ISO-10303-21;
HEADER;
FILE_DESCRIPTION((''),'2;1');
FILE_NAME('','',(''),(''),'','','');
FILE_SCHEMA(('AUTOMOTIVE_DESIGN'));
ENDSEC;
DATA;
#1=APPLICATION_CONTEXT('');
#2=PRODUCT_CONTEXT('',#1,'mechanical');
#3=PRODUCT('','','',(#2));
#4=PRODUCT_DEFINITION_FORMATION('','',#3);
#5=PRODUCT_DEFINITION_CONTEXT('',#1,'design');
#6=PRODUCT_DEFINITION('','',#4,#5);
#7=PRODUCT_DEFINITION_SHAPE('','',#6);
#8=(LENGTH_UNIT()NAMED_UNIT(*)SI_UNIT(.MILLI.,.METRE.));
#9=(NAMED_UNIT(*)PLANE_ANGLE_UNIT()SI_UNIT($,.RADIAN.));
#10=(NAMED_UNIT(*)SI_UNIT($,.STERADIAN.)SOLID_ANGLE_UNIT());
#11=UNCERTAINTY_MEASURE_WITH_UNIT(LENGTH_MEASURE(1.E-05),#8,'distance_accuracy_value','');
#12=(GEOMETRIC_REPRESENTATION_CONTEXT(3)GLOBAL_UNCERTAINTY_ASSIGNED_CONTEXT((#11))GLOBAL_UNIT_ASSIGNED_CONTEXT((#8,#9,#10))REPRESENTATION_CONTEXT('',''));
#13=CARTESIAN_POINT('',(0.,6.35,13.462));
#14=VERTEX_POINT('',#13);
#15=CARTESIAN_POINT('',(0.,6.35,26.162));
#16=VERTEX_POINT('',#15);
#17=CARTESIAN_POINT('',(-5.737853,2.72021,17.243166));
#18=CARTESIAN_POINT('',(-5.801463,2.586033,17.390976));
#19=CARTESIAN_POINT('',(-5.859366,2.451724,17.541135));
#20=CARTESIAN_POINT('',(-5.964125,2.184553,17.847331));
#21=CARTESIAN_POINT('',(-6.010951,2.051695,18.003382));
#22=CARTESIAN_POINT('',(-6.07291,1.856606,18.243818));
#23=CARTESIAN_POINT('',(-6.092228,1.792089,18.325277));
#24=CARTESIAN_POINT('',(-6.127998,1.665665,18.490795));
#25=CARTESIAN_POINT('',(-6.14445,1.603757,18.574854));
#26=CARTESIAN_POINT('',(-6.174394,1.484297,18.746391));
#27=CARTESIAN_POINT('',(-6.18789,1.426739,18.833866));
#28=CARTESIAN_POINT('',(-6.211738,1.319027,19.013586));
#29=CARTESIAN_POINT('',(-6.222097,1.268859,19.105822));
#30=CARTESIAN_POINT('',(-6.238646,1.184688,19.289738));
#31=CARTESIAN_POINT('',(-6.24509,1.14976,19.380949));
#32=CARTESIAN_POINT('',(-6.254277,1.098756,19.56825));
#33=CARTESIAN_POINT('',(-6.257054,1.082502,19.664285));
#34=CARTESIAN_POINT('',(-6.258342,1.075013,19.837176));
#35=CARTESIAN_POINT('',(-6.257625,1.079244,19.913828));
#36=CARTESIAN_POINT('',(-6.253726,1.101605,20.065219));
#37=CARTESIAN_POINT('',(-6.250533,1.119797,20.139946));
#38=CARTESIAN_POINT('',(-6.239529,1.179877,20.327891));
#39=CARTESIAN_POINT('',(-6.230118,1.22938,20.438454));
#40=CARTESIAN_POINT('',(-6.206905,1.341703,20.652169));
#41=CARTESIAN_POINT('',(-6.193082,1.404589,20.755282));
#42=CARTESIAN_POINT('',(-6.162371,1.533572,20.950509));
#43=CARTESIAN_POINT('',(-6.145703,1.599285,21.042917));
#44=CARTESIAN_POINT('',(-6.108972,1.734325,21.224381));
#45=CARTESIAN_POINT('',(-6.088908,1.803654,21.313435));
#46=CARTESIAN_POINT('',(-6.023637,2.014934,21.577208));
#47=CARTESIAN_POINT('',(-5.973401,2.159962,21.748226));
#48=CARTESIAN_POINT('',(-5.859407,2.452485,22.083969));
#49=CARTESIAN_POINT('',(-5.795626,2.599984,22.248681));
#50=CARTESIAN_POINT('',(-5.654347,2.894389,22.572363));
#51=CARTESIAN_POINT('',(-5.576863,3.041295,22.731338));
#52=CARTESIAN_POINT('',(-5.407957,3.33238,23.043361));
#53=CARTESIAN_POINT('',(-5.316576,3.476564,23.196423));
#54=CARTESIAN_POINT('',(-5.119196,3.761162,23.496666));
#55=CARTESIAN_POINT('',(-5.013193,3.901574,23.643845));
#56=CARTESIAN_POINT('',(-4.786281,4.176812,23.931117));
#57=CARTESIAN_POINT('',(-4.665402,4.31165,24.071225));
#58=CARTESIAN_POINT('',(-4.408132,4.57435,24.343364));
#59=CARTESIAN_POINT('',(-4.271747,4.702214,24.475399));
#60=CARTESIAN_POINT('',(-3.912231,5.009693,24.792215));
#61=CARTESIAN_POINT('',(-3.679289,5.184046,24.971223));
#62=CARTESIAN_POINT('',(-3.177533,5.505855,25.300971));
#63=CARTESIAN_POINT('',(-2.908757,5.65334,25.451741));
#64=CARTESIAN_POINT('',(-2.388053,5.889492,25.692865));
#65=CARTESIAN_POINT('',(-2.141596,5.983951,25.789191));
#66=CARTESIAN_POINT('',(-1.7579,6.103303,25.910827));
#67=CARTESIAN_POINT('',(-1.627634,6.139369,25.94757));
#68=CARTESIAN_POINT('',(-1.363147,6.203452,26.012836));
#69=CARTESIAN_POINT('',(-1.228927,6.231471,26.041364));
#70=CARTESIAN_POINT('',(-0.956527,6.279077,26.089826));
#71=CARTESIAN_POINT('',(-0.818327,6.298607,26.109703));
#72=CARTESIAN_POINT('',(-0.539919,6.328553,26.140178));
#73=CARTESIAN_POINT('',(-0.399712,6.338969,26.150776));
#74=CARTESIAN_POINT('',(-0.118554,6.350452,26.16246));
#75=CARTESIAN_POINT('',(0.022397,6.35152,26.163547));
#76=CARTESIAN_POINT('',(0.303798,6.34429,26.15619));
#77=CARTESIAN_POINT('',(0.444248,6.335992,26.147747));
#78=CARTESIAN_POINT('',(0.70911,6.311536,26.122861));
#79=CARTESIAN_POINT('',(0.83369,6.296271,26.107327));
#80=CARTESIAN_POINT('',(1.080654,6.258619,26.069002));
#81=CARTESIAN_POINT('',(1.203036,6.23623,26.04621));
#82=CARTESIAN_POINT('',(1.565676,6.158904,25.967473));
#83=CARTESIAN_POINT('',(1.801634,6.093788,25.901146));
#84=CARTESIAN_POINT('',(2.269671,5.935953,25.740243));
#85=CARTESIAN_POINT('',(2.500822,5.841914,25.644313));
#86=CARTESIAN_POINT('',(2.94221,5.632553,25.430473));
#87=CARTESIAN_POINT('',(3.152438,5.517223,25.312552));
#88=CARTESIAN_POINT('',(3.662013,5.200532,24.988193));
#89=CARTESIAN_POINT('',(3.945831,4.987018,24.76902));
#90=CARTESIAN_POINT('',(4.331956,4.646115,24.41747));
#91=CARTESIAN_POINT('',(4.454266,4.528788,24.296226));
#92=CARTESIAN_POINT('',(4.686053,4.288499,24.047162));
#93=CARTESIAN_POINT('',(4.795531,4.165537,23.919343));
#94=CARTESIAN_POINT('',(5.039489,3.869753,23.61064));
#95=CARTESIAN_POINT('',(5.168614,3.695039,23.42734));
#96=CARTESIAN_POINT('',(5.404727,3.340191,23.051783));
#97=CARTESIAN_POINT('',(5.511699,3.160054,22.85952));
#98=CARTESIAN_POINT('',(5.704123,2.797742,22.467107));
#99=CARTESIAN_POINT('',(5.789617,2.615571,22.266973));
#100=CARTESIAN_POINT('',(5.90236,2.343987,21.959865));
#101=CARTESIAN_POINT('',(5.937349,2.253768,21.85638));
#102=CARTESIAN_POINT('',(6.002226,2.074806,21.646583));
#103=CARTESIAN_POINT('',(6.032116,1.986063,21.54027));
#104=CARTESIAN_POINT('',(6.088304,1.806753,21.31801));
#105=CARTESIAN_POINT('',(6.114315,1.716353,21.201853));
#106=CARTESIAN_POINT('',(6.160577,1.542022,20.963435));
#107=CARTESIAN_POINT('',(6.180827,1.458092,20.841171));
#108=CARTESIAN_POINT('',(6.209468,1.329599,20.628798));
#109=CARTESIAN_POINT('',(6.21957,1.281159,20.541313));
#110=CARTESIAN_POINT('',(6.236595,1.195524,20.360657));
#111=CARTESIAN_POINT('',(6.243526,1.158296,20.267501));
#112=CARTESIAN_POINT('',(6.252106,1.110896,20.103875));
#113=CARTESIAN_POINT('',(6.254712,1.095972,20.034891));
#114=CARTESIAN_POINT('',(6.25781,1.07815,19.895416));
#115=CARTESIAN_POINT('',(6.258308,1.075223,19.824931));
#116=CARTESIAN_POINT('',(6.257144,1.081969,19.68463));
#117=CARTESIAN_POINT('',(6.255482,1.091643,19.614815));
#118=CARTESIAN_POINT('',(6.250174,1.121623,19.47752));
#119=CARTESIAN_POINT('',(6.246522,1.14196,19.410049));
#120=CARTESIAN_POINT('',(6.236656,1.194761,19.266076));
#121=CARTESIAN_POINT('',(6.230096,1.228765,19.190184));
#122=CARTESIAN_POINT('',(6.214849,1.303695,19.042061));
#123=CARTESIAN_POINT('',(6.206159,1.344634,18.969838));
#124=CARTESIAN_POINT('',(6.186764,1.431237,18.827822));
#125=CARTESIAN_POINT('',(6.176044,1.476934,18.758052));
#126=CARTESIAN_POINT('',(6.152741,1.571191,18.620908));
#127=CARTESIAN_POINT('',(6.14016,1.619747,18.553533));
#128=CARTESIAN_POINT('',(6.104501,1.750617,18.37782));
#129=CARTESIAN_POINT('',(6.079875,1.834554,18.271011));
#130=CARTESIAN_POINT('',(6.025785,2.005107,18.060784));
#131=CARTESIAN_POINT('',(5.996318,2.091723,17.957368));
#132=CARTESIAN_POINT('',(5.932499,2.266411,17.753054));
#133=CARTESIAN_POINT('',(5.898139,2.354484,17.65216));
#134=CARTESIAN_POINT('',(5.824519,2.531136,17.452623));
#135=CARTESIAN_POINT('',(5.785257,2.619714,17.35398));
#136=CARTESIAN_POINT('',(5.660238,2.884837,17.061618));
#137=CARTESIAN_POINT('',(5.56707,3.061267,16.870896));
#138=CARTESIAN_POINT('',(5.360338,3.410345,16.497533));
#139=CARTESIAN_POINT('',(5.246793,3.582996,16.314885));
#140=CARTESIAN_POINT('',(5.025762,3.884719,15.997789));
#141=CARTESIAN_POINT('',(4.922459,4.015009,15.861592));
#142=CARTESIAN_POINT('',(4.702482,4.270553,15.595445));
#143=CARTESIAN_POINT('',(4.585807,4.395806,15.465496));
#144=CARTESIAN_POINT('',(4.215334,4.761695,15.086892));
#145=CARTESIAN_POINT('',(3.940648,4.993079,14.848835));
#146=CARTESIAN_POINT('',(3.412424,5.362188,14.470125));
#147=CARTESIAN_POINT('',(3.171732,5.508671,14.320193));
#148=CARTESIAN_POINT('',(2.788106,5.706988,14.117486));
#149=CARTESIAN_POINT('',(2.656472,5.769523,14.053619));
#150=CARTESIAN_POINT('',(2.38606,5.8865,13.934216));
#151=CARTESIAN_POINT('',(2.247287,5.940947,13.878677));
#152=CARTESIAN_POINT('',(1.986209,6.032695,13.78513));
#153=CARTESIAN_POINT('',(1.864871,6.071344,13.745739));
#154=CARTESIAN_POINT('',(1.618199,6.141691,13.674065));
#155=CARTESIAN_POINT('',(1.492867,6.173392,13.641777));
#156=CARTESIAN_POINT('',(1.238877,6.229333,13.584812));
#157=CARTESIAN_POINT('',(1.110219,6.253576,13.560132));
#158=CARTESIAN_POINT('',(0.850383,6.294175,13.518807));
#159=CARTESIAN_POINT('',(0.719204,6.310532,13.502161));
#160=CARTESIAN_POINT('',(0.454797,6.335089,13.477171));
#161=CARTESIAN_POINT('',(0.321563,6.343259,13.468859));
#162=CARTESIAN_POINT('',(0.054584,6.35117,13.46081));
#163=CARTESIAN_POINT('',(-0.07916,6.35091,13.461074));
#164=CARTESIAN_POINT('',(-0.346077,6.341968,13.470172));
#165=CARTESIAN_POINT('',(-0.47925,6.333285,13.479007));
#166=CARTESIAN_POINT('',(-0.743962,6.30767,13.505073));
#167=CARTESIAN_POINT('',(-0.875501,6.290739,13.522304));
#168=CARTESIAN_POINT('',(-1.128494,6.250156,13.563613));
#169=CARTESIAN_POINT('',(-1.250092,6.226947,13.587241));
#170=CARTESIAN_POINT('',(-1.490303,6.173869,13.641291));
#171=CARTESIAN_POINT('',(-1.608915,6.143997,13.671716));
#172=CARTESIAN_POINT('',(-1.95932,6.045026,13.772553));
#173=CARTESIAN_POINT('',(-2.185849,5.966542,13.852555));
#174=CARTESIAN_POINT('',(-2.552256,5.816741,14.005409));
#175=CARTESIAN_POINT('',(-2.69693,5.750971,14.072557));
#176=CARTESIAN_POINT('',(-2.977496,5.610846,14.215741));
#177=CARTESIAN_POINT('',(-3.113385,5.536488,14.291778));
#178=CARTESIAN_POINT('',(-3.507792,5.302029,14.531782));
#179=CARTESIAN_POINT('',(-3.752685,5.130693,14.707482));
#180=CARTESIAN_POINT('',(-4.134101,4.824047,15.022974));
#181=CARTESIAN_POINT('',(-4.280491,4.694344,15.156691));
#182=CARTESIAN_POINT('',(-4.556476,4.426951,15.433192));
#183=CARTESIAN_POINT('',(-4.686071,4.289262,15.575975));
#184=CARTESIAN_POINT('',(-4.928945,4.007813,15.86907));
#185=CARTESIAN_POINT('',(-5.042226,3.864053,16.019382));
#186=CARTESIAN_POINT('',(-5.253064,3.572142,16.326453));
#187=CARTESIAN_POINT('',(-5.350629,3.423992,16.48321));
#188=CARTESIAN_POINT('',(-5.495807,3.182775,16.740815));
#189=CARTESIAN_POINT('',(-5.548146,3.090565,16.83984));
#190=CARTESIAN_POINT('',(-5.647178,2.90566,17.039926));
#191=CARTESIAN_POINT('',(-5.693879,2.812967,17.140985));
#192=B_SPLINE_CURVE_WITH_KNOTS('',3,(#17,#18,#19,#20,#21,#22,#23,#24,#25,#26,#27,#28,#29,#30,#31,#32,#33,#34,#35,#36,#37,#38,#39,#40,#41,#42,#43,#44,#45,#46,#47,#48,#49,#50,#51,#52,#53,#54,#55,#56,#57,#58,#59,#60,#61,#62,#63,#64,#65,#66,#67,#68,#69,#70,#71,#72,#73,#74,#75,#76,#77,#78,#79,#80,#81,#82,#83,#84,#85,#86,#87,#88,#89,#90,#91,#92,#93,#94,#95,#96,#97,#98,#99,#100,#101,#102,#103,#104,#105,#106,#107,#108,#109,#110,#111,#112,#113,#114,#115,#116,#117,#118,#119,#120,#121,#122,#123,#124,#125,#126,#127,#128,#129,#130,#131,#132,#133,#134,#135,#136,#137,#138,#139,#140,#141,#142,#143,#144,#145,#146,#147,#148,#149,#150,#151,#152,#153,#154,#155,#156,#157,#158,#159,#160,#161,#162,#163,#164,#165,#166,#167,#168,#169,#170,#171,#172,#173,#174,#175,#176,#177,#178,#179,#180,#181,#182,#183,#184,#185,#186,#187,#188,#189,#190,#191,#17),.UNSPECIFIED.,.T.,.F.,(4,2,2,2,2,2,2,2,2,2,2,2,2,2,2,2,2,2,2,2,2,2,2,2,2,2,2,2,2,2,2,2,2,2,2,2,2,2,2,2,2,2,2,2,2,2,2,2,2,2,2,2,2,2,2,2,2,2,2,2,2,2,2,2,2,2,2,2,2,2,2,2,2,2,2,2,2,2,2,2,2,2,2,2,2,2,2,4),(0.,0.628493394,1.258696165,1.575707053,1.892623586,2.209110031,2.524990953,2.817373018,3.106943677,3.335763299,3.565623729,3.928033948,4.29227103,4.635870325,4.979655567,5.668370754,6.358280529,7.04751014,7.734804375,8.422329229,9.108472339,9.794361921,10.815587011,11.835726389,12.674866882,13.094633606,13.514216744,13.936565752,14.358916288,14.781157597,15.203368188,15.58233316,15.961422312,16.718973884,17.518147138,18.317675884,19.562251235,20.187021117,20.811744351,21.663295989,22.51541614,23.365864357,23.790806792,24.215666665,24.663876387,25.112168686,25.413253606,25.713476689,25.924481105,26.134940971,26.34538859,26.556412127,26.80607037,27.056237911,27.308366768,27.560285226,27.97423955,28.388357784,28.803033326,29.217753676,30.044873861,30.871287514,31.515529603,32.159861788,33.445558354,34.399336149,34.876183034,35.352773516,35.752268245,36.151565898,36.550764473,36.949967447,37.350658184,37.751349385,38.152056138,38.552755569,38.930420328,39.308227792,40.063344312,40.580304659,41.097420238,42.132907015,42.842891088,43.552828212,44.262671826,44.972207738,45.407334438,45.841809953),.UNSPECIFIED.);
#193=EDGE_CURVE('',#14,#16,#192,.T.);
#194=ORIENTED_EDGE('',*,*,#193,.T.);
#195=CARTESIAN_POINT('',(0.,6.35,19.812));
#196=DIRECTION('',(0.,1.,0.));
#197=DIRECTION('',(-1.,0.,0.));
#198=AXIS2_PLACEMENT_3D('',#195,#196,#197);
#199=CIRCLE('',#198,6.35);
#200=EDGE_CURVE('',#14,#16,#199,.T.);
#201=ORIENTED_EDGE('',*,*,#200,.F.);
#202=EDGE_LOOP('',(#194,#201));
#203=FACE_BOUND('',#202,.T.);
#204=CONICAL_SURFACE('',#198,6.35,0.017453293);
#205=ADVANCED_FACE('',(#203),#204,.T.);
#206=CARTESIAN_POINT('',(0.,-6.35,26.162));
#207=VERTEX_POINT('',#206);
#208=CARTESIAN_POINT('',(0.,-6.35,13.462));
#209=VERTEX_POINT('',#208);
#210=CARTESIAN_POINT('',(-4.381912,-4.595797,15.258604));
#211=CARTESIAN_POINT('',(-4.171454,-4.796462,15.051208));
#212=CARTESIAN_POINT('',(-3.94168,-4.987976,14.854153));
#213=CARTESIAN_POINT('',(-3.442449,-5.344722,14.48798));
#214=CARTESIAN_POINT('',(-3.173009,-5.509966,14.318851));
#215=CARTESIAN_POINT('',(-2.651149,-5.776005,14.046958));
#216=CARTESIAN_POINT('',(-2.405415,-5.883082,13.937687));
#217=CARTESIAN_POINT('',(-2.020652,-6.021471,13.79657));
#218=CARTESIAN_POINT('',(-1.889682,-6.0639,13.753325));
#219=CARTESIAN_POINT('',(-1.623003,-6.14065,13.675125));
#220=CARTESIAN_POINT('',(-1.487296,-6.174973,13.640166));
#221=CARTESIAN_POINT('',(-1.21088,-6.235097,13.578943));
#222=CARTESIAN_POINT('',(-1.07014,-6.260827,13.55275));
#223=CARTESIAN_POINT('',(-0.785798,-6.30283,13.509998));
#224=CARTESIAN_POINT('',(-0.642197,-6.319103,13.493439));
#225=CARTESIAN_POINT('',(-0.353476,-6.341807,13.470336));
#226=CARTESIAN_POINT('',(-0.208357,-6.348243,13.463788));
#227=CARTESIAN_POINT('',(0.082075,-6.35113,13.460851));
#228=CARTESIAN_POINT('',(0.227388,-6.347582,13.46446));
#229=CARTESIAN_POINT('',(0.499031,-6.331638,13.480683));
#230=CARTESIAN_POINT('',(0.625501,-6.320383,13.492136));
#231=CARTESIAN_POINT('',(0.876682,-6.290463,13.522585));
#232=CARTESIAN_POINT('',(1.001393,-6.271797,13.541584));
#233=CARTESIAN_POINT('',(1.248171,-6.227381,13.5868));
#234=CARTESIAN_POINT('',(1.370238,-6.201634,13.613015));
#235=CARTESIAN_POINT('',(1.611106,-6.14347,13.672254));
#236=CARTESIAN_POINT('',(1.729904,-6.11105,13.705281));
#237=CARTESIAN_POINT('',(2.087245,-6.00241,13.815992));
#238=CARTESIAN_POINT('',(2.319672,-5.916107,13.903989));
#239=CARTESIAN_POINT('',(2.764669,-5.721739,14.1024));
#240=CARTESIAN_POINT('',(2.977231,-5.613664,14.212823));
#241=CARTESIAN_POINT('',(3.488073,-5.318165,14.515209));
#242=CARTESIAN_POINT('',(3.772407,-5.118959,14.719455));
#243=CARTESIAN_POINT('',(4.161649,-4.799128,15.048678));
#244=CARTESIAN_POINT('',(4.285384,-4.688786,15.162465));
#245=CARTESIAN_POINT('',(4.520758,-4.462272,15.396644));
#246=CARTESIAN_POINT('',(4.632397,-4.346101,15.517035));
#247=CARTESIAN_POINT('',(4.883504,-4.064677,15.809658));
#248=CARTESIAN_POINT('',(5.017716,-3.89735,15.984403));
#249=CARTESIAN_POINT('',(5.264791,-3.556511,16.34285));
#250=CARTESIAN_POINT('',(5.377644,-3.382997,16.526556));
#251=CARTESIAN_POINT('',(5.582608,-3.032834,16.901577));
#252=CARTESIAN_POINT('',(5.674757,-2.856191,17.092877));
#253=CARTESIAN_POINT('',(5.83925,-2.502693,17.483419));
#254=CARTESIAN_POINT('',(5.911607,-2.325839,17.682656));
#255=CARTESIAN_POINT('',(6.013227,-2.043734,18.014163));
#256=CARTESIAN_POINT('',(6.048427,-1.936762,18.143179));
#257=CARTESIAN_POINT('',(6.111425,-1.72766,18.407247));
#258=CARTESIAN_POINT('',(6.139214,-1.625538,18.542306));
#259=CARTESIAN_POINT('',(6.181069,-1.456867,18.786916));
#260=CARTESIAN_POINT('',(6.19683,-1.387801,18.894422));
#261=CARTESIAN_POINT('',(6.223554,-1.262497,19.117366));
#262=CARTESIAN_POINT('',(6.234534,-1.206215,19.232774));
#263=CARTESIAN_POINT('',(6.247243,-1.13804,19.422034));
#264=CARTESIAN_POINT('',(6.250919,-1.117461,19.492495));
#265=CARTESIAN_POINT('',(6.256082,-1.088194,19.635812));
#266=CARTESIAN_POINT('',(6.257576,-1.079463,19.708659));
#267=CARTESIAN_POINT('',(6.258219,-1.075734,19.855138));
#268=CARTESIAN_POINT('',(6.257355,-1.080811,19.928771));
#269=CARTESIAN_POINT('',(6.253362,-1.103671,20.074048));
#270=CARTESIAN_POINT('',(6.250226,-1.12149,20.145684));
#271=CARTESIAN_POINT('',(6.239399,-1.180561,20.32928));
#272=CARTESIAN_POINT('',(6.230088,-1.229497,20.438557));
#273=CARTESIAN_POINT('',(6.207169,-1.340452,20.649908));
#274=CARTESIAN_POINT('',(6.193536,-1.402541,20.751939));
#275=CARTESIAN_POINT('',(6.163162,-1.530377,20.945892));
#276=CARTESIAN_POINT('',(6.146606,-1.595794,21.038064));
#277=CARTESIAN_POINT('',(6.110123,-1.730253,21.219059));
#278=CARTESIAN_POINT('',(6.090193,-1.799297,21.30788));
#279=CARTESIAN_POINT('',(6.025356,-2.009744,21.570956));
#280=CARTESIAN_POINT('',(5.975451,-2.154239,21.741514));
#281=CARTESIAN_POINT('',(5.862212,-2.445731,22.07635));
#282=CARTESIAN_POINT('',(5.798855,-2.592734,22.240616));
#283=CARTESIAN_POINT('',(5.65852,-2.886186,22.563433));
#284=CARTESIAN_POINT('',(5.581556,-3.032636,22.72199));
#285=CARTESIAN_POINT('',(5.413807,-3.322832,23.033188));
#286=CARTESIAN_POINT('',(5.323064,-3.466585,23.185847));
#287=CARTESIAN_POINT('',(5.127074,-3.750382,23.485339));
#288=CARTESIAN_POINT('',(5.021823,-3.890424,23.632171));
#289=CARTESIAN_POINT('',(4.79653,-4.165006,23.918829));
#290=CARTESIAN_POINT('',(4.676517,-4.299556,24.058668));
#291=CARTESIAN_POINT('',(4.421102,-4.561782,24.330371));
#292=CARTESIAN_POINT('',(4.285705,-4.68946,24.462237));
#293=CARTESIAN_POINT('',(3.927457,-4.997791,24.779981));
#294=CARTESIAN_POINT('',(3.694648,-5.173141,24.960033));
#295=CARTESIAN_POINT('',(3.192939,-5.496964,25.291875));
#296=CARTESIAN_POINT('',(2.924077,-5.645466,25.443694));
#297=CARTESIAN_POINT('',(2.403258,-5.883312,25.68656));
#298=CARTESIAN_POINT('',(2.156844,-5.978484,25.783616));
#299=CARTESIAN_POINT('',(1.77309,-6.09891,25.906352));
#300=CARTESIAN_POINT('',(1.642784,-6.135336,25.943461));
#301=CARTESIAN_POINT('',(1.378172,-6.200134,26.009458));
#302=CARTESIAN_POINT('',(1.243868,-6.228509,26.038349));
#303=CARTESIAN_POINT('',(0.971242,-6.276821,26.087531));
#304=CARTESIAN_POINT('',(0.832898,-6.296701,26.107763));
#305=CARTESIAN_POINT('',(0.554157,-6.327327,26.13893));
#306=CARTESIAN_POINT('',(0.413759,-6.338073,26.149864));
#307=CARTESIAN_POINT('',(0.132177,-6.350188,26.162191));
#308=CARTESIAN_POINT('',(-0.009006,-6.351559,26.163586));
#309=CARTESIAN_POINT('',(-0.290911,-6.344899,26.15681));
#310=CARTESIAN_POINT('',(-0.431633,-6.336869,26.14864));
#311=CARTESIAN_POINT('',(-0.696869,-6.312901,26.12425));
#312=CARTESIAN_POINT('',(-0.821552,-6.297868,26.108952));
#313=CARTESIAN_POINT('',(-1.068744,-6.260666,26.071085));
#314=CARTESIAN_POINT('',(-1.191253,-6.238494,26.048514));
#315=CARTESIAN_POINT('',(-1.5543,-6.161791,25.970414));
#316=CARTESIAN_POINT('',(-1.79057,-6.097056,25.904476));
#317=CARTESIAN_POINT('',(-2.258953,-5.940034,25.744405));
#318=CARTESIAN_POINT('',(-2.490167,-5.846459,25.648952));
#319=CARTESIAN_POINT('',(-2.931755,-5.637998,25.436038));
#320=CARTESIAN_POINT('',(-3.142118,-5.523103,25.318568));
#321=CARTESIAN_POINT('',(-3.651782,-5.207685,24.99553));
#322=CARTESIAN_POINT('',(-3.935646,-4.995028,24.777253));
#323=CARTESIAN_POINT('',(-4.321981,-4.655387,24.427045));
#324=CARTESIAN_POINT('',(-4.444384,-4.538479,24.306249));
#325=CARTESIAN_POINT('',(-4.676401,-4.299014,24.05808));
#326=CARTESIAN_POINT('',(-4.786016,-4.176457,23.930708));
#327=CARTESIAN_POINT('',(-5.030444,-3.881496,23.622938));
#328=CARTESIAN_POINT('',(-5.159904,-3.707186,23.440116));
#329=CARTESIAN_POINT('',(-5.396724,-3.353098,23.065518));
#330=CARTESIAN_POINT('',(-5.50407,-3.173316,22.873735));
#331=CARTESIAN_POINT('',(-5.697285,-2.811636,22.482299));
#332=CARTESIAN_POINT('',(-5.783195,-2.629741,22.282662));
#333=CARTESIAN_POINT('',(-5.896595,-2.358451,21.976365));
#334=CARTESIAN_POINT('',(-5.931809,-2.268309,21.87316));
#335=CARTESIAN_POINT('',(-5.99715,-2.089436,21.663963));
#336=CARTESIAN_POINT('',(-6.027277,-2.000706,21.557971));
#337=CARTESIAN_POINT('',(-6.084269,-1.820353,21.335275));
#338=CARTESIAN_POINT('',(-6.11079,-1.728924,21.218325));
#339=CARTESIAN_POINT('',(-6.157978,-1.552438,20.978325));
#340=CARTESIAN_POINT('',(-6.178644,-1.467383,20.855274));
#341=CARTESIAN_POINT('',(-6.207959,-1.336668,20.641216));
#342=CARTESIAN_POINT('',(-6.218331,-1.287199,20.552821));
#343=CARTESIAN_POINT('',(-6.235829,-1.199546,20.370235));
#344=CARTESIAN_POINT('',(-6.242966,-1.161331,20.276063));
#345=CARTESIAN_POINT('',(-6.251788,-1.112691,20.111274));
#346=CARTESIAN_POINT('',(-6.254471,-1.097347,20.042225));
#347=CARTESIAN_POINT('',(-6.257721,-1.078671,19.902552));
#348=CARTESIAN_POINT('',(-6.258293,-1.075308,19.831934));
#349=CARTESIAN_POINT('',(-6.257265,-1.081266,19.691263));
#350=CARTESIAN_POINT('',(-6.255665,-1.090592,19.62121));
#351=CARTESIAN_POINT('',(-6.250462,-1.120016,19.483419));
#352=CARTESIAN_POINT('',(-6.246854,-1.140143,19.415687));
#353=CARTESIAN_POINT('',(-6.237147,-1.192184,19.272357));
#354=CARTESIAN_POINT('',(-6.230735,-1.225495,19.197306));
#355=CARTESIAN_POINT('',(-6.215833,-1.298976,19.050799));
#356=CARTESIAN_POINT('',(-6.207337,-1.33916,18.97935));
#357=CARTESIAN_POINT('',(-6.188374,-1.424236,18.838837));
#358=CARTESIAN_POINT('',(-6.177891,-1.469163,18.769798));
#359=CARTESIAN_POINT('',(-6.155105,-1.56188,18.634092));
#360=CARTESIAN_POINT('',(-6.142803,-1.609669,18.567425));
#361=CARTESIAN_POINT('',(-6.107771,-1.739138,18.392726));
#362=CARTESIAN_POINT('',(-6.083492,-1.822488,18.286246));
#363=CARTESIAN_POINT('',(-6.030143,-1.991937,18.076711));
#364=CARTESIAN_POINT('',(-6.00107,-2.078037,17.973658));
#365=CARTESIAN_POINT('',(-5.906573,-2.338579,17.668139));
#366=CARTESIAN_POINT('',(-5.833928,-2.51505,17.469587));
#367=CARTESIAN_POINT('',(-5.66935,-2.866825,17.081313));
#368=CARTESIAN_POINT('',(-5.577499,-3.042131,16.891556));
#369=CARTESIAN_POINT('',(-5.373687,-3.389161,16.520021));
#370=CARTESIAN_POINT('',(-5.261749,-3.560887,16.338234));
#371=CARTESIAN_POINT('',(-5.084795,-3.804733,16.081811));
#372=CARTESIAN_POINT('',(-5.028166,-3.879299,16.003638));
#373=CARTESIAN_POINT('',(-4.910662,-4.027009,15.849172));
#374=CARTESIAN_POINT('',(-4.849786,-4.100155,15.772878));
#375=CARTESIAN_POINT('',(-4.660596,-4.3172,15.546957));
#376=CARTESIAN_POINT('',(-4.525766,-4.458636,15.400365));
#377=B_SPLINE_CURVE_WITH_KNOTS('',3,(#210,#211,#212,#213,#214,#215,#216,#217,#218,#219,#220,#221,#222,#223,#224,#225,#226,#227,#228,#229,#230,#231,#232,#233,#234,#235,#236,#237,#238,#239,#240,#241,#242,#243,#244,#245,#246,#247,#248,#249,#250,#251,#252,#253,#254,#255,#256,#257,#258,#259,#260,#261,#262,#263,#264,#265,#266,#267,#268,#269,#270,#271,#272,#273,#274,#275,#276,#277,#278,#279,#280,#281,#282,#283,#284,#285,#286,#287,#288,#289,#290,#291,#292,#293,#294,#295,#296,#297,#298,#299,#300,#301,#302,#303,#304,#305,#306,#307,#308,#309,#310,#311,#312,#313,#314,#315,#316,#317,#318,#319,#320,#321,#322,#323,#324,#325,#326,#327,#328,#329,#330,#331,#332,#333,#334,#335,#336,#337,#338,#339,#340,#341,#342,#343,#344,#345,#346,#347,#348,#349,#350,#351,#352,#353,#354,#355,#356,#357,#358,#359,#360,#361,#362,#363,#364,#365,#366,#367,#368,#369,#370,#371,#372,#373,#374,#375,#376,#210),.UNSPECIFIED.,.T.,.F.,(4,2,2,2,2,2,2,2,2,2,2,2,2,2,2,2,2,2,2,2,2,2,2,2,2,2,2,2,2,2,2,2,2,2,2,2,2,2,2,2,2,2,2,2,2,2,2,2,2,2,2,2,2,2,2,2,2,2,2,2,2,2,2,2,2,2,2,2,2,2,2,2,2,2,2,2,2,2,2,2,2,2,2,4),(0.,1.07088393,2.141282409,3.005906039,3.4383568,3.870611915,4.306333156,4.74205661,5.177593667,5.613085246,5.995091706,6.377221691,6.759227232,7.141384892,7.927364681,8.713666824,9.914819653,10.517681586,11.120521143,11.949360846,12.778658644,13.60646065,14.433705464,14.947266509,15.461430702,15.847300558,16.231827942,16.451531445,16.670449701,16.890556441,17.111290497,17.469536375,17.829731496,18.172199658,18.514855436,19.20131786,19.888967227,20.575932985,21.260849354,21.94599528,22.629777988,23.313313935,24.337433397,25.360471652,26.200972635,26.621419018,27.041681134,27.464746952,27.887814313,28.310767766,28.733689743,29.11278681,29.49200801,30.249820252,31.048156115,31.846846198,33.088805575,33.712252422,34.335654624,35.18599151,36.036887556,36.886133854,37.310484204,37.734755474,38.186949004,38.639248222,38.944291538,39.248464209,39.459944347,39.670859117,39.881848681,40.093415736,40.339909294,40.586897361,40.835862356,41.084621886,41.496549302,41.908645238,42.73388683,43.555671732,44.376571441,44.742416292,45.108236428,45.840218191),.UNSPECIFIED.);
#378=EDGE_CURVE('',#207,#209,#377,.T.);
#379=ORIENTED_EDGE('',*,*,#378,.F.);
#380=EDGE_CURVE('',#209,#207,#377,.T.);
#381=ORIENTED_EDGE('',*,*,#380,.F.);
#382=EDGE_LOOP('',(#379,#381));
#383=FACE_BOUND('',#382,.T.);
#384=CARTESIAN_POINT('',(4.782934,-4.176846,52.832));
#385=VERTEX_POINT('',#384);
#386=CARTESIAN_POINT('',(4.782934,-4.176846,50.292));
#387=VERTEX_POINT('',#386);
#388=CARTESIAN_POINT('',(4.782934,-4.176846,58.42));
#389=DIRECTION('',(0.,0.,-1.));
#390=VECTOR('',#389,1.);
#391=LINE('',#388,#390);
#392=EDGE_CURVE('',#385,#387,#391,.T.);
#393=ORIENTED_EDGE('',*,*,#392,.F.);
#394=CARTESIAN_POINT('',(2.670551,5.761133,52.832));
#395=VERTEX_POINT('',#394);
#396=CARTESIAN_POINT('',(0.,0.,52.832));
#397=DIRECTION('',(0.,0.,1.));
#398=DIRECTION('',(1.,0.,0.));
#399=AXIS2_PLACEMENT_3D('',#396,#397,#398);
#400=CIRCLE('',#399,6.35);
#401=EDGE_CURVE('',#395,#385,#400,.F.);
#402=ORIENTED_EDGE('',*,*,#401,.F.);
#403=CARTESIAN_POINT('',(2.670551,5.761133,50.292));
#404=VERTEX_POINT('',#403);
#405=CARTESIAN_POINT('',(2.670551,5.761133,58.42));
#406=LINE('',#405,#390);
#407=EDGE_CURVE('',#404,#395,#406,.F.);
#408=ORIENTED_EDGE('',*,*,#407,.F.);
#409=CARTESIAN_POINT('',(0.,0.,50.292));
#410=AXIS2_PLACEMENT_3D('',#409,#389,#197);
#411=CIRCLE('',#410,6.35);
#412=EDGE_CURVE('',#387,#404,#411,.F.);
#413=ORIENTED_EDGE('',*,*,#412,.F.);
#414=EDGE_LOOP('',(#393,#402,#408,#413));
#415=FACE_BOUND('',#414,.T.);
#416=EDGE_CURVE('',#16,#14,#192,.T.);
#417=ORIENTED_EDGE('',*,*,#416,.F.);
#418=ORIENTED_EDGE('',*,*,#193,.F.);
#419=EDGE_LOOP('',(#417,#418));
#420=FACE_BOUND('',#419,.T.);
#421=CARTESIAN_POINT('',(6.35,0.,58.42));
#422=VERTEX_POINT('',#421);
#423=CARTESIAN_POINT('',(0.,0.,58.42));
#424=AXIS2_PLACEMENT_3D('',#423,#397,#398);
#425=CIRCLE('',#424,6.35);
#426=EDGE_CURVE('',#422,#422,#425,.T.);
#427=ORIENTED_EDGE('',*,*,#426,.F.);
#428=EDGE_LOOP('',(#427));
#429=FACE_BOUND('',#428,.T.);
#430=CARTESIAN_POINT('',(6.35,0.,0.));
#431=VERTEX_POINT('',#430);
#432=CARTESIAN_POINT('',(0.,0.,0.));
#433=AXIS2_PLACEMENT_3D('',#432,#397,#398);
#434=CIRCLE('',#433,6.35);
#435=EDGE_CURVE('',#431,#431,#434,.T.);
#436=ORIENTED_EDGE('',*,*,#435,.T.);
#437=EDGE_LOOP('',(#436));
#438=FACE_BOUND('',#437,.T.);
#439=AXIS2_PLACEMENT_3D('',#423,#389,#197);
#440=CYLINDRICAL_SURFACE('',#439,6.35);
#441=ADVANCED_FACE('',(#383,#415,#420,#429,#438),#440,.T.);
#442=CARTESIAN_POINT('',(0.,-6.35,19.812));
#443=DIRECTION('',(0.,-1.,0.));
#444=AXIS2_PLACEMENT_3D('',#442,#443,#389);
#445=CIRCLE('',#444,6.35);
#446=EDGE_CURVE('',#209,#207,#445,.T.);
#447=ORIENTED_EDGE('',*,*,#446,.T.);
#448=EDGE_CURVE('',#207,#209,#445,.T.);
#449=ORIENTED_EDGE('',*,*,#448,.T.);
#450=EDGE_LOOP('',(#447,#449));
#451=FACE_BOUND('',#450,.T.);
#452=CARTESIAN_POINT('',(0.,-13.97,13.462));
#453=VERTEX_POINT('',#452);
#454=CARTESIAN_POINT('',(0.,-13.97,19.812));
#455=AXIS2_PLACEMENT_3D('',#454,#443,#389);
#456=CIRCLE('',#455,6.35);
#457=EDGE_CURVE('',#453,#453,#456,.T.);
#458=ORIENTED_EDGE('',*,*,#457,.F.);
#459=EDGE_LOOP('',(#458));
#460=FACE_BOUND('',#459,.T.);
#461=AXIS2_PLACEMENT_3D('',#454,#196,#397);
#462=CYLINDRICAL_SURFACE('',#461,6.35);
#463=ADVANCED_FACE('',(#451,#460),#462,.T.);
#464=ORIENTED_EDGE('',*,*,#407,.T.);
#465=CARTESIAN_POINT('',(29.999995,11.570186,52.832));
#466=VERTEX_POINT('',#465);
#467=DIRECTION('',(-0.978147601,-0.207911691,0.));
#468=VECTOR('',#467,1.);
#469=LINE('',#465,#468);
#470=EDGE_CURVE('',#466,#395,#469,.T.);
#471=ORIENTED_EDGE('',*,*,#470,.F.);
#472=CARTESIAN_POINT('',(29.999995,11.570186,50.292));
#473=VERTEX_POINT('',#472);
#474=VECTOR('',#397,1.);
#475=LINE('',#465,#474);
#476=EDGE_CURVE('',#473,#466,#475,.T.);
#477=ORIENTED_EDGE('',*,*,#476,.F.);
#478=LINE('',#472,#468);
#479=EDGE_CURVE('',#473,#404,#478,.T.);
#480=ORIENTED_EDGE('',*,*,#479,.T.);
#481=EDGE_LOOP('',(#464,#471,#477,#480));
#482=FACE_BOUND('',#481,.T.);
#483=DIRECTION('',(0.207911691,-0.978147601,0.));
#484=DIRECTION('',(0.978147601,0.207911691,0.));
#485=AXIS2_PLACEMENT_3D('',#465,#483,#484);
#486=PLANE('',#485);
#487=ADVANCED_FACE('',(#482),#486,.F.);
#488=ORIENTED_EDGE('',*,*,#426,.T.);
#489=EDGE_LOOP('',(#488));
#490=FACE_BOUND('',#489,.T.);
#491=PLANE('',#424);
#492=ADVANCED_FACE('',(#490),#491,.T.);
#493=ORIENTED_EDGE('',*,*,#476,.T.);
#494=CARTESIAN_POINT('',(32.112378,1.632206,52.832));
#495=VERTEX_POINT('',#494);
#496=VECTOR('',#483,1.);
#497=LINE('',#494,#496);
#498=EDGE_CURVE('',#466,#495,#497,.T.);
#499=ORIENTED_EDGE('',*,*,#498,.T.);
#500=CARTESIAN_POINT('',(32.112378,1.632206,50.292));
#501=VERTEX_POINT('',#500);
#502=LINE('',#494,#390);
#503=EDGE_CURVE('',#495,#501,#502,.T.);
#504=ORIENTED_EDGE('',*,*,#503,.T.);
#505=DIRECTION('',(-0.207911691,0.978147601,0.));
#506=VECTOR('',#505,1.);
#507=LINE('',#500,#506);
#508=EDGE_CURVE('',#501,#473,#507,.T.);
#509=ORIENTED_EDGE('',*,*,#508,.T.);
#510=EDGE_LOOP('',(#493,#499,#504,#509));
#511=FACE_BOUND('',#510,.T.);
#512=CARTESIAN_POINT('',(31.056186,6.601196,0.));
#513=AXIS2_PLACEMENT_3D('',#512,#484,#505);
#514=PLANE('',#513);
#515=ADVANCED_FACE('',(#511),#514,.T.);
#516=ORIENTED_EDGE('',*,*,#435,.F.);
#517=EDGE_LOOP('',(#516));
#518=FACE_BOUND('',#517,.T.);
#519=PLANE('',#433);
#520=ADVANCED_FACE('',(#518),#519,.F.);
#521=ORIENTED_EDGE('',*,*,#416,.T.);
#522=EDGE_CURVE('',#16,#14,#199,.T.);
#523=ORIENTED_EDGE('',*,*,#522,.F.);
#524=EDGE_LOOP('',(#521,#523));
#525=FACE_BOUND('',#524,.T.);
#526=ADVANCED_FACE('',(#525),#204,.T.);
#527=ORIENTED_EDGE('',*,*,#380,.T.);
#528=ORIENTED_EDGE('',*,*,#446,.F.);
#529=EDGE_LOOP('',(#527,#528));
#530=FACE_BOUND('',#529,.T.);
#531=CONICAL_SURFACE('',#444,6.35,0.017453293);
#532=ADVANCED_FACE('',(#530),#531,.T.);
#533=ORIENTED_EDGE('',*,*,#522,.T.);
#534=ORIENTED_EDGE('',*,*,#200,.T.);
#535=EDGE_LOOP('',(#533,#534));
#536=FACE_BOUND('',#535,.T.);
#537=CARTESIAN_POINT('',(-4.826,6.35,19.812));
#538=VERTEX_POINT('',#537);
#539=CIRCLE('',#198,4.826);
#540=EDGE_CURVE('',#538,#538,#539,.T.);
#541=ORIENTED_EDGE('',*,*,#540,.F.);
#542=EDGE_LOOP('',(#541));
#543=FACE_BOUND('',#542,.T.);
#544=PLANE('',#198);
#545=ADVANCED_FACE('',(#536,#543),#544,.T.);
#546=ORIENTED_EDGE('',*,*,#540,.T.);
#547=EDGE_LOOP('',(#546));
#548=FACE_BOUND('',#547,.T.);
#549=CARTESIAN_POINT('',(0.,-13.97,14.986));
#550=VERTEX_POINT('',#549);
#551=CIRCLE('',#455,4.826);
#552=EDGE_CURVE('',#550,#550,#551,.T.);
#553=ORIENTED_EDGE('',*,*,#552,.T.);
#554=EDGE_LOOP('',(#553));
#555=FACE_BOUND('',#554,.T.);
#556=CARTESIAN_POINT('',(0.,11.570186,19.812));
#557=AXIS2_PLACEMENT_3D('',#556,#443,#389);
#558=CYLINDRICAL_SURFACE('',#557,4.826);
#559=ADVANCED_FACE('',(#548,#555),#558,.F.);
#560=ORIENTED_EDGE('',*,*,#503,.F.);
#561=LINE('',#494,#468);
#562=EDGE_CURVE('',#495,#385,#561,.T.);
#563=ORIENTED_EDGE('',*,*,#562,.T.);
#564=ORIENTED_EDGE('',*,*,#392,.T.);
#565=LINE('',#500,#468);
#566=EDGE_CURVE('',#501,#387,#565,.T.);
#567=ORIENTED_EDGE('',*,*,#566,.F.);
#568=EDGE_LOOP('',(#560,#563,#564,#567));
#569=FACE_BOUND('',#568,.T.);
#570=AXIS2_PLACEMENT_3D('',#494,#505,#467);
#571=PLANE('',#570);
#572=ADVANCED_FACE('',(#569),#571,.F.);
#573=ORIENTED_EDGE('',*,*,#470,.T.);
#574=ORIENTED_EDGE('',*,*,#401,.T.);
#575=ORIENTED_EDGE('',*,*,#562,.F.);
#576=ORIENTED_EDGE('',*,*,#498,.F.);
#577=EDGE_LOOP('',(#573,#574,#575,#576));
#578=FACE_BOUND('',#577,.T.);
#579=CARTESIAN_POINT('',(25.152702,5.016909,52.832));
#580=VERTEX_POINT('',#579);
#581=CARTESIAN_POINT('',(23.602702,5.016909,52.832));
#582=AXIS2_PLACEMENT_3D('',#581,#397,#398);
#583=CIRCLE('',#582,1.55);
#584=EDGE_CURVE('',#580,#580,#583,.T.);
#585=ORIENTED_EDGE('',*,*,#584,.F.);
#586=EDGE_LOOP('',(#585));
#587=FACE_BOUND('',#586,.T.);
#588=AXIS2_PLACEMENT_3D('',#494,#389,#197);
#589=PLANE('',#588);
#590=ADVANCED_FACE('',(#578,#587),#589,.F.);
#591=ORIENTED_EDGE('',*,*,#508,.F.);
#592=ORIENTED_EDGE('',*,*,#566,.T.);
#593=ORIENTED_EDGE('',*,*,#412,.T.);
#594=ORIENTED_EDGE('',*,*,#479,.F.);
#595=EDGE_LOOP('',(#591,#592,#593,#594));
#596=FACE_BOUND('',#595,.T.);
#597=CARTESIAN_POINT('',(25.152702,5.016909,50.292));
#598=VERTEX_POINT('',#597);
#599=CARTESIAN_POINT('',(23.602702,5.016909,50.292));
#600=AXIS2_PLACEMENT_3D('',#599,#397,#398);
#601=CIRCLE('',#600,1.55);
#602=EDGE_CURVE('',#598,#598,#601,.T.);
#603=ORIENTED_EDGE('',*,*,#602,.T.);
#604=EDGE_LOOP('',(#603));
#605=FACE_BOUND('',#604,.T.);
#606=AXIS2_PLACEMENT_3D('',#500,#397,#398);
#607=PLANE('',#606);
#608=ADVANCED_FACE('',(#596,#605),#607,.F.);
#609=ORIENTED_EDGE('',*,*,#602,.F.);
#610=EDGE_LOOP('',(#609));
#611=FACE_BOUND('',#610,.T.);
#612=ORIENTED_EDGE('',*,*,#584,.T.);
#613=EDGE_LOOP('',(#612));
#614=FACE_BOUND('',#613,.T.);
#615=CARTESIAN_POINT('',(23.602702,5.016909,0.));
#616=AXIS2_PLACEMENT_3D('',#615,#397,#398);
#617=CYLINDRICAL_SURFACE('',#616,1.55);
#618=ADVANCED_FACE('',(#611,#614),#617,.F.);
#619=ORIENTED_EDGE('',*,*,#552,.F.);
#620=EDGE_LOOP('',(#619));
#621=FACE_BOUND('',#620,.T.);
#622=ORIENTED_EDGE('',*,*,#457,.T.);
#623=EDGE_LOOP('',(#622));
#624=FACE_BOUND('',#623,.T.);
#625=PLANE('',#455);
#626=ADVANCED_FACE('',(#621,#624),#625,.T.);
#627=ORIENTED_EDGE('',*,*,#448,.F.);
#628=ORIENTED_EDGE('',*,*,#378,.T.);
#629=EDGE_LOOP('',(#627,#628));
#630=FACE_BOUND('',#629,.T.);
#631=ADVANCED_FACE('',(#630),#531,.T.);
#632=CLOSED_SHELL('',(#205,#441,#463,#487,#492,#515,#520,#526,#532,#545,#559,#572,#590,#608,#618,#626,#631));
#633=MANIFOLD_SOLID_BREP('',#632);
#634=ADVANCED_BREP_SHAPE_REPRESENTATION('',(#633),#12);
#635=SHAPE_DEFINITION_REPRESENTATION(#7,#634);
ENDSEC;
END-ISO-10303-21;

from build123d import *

# Parameters (mm, degrees)
SKETCH1_R           = 6.35
BOSS_EXTRUDE1_DEPTH = 58.42
BOSS_EXTRUDE3_START = -2.54
SKETCH7_W           = 10.16
SKETCH7_H           = 2.54
BOSS_EXTRUDE3_DEPTH = 27.94
SKETCH10_R          = 1.55
CUT_EXTRUDE2_DEPTH  = 64.384429767
SKETCH13_R          = 4.826
CUT_EXTRUDE3_DEPTH  = 72.389091006


# Read off the part's stored shape, not the designer's step: Boss-Extrude2, Boss-Extrude4
with BuildPart() as part:
    # Sketch1 → Boss-Extrude1 (new body)
    with BuildSketch(Plane.XY):
        with Locations(Location((0, 0, 0), (0, 0, 180))):
            Circle(SKETCH1_R)
    extrude(amount=BOSS_EXTRUDE1_DEPTH)

    # Boss-Extrude2 outline → Boss-Extrude2 (revolve)
    with BuildSketch(Plane.XY.offset(19.812)):
        Polygon((6.35, -13.97), (6.35, -6.35), (6.257921095, -1.074803042), (0, -1.074803042), (0, -13.97), align=None)
    revolve(axis=Axis((0, 0, 19.812), (0, 1, 0)))

    # Sketch7 → Boss-Extrude3 (add)
    with BuildSketch(Plane(origin=(6.211237265, 1.320239237, 0), x_dir=(0.20791169081776328, -0.9781476007338049, 0), z_dir=(0.9781476007338049, 0.20791169081776328, 0)).offset(BOSS_EXTRUDE3_START)):
        with Locations((0, -51.562)):
            Rectangle(SKETCH7_W, SKETCH7_H)
    extrude(amount=BOSS_EXTRUDE3_DEPTH)

    # Sketch10 → Cut-Extrude2 (cut, through all)
    with BuildSketch(Plane.XY.offset(52.832)):
        with Locations((23.602701606, 5.016909099)):
            Circle(SKETCH10_R)
    extrude(amount=-CUT_EXTRUDE2_DEPTH, mode=Mode.SUBTRACT)

    # Boss-Extrude4 outline → Boss-Extrude4 (revolve)
    with BuildSketch(Plane.XY.offset(19.812)):
        Polygon((0, 6.350021501), (0, 1.075341111), (6.257930487, 1.075341111), (6.350000375, 6.350021501), align=None)
    revolve(axis=Axis((0, 0, 19.812), (0, 1, 0)))

    # Sketch13 → Cut-Extrude3 (cut, through all)
    with BuildSketch(Plane.XZ.offset(13.97)):
        with Locations(Location((0, 19.812, 0), (0, 0, 270))):
            Circle(SKETCH13_R)
    extrude(amount=-CUT_EXTRUDE3_DEPTH, mode=Mode.SUBTRACT)


solid = part.part
